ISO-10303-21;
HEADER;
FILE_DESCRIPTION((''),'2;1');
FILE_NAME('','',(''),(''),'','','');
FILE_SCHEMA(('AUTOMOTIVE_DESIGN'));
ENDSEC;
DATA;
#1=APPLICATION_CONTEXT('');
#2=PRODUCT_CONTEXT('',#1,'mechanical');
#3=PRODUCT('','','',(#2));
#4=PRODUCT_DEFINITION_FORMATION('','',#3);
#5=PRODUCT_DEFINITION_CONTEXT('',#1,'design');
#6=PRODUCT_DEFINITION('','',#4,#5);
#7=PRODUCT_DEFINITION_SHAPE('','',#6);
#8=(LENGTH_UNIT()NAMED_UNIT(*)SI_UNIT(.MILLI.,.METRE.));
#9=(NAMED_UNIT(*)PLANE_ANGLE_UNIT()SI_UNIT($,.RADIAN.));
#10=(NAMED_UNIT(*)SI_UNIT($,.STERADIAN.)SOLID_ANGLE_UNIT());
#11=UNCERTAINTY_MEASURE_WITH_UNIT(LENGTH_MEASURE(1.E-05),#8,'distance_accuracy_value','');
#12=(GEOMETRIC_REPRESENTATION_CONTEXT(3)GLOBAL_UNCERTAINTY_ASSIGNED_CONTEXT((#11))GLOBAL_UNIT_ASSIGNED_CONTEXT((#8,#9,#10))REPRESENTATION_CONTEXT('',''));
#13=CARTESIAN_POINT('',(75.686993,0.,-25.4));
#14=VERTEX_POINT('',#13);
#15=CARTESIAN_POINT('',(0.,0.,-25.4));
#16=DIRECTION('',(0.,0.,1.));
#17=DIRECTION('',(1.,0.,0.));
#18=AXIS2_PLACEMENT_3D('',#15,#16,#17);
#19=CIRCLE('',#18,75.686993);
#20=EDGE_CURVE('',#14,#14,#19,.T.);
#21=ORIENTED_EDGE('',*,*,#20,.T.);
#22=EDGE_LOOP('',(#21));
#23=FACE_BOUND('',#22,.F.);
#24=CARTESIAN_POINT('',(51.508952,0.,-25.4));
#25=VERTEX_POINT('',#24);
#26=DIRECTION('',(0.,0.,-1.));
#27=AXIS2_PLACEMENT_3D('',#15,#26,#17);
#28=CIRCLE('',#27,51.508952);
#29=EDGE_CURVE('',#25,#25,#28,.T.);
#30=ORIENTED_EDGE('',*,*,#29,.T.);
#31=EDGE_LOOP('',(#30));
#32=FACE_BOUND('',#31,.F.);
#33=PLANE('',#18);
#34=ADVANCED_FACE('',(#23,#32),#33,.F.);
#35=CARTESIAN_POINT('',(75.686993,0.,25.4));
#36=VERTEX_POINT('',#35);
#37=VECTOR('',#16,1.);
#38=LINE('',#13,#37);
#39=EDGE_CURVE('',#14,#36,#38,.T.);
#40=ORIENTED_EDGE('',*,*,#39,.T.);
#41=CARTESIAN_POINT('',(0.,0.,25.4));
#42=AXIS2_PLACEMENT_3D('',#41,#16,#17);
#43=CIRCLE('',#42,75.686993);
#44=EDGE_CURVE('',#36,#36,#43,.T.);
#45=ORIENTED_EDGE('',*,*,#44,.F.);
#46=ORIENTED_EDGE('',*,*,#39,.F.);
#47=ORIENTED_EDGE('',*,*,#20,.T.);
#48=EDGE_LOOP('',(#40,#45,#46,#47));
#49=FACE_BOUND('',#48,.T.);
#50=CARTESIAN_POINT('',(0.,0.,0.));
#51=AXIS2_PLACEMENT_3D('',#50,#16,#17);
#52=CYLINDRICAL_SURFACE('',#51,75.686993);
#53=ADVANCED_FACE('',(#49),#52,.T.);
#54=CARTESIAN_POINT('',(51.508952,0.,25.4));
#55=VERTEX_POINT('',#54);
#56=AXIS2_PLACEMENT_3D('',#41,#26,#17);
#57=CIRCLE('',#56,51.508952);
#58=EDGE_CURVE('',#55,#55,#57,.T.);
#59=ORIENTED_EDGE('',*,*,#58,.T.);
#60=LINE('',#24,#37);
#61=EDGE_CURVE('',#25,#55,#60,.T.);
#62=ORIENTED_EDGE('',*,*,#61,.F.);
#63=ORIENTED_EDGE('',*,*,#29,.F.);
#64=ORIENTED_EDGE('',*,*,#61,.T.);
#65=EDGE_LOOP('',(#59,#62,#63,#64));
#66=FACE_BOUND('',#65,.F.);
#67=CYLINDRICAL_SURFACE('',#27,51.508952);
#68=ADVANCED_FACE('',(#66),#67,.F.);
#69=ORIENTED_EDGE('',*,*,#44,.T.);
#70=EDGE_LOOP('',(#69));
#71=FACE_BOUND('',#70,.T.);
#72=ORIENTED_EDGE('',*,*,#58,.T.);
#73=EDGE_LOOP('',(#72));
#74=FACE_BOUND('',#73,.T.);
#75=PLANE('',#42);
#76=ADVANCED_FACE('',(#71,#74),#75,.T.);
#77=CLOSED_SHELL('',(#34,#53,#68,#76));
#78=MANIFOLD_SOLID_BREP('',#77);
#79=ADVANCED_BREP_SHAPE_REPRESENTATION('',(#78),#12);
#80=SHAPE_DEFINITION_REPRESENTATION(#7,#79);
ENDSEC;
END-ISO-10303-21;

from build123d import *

# Parameters (mm, degrees)
F0_R     = 75.686993118
F1_DEPTH = 25.4
F2_DEPTH = 25.4
F7_R     = 51.508951791
F8_DEPTH = 50.801


# Not quite as in the source:
# - a feature of the source that left no trace in its solid (it failed there, or was rolled back) is left out
# - the program builds the solid bodies; features that only make, move or delete a surface that nothing else refers to are left out


with BuildPart() as f1:
    # F0 (on Top) → F1 (new body)
    with BuildSketch(Plane.XY):
        Circle(F0_R)
    extrude(amount=F1_DEPTH)

    # F2 (add): a face of the model
    f2_faces = [f1.faces().sort_by_distance(p)[0] for p in [
        (0, 0, 0),
    ]]
    extrude(f2_faces, amount=F2_DEPTH)

    # F7 (on face) → F8 (cut, through all)
    with BuildSketch(Plane(origin=(0, 0, -25.4), x_dir=(1, 0, 0), z_dir=(0, 0, -1))):
        Circle(F7_R)
    extrude(amount=-F8_DEPTH, mode=Mode.SUBTRACT)


solid = f1.part
